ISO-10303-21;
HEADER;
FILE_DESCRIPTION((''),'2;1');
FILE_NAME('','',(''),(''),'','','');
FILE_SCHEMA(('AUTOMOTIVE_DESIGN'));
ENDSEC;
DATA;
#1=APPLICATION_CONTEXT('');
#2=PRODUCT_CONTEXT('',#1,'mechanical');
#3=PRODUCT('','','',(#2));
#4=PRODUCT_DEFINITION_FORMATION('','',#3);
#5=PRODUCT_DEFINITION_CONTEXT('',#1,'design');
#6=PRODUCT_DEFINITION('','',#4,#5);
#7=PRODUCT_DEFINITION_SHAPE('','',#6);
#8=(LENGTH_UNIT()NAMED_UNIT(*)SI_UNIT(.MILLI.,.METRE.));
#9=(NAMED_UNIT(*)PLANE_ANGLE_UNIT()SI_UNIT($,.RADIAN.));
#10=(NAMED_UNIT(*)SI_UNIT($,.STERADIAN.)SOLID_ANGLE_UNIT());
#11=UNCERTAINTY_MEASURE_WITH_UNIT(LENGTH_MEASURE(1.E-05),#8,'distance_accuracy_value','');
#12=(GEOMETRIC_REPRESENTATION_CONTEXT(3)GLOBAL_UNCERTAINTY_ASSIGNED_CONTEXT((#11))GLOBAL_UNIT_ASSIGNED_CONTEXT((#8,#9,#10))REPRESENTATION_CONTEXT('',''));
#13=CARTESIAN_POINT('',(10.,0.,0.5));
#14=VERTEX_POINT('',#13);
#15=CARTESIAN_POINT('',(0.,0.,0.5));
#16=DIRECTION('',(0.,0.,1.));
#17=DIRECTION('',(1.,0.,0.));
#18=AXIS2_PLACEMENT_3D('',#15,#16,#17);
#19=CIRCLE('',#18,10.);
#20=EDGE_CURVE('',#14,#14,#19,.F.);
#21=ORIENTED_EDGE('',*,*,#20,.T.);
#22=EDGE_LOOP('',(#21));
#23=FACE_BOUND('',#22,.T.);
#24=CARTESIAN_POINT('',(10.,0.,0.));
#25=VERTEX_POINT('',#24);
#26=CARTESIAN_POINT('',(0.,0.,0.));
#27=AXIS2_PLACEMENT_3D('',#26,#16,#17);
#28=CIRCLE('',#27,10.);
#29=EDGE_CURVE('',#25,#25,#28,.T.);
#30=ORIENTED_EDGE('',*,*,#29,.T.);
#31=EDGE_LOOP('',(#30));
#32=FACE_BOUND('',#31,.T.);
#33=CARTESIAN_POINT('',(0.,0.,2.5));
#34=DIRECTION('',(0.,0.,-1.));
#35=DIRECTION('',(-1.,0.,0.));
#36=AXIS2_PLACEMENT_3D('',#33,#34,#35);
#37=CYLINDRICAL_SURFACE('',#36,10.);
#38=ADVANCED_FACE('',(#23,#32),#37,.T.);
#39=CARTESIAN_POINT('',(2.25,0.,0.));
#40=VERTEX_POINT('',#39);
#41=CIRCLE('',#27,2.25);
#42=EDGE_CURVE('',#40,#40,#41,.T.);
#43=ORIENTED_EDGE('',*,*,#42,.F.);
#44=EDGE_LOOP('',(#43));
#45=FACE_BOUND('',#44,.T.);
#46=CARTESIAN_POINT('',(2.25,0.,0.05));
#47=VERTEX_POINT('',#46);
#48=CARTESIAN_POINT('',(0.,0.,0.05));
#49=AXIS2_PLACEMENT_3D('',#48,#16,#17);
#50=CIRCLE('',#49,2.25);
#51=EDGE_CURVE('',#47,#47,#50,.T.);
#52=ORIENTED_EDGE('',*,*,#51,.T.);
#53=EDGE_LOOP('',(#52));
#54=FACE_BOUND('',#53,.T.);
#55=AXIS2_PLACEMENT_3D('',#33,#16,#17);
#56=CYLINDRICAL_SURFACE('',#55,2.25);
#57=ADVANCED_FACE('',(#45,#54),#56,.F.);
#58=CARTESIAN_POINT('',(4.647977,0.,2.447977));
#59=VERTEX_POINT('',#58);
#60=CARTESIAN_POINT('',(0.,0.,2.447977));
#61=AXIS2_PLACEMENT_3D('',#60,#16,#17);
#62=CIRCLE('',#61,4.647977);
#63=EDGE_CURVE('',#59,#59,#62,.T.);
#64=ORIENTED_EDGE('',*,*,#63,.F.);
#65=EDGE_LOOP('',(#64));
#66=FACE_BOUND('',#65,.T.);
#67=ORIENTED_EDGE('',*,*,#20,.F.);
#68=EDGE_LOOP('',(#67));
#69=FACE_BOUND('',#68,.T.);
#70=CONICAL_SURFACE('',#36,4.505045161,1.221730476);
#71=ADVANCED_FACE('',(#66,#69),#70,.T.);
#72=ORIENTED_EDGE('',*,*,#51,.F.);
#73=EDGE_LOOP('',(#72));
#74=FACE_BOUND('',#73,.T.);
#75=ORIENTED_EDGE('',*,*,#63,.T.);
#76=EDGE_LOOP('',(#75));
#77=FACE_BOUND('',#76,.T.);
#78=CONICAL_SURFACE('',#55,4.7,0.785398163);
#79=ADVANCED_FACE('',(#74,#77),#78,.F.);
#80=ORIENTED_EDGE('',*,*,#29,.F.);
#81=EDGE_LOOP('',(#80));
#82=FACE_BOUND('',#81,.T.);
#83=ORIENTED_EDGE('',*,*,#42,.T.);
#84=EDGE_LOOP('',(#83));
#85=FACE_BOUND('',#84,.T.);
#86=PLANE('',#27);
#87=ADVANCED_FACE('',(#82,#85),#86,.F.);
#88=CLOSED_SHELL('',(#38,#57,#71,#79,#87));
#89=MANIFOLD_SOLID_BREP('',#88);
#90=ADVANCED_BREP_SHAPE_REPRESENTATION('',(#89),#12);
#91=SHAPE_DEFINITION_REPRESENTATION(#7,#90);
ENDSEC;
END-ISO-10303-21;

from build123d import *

# Parameters (mm, degrees)
SKETCH1_R           = 10
BOSS_EXTRUDE1_DEPTH = 2.5
CHAMFER1_SIZE       = 2
CHAMFER1_SIZE_2     = 5.494954839


with BuildPart() as part:
    # Sketch1 → Boss-Extrude1 (new body)
    with BuildSketch(Plane.XY):
        Circle(SKETCH1_R)
    extrude(amount=BOSS_EXTRUDE1_DEPTH)

    # Sketch3 → CSK for M4 Flat Head Machine Screw1 (revolve, cut)
    with BuildSketch(Plane(origin=(0, 0, 2.5), x_dir=(0, -1, 0), z_dir=(1, 0, 0))):
        Polygon((0, 0), (0, 2.5), (2.25, 2.5), (2.25, 2.45), (4.7, 0), align=None)
    revolve(axis=Axis((0, 0, 8.85), (0, 0, -1)), mode=Mode.SUBTRACT)

    # Chamfer1
    # the kernel refuses this chamfer: 5.494954839, 2 mm, written as the material it takes off along each edge
    with BuildSketch(Plane(origin=(0, 0, 2.5), x_dir=(1, 0, 0), z_dir=(0, -1, 0))) as chamfer1_piece_1:
        Polygon((10, -CHAMFER1_SIZE), (10 - CHAMFER1_SIZE_2, 0), (10, 0), align=None)
    revolve(axis=Axis((0, 0, 2.5), (0, 0, 1)), mode=Mode.SUBTRACT)


solid = part.part
